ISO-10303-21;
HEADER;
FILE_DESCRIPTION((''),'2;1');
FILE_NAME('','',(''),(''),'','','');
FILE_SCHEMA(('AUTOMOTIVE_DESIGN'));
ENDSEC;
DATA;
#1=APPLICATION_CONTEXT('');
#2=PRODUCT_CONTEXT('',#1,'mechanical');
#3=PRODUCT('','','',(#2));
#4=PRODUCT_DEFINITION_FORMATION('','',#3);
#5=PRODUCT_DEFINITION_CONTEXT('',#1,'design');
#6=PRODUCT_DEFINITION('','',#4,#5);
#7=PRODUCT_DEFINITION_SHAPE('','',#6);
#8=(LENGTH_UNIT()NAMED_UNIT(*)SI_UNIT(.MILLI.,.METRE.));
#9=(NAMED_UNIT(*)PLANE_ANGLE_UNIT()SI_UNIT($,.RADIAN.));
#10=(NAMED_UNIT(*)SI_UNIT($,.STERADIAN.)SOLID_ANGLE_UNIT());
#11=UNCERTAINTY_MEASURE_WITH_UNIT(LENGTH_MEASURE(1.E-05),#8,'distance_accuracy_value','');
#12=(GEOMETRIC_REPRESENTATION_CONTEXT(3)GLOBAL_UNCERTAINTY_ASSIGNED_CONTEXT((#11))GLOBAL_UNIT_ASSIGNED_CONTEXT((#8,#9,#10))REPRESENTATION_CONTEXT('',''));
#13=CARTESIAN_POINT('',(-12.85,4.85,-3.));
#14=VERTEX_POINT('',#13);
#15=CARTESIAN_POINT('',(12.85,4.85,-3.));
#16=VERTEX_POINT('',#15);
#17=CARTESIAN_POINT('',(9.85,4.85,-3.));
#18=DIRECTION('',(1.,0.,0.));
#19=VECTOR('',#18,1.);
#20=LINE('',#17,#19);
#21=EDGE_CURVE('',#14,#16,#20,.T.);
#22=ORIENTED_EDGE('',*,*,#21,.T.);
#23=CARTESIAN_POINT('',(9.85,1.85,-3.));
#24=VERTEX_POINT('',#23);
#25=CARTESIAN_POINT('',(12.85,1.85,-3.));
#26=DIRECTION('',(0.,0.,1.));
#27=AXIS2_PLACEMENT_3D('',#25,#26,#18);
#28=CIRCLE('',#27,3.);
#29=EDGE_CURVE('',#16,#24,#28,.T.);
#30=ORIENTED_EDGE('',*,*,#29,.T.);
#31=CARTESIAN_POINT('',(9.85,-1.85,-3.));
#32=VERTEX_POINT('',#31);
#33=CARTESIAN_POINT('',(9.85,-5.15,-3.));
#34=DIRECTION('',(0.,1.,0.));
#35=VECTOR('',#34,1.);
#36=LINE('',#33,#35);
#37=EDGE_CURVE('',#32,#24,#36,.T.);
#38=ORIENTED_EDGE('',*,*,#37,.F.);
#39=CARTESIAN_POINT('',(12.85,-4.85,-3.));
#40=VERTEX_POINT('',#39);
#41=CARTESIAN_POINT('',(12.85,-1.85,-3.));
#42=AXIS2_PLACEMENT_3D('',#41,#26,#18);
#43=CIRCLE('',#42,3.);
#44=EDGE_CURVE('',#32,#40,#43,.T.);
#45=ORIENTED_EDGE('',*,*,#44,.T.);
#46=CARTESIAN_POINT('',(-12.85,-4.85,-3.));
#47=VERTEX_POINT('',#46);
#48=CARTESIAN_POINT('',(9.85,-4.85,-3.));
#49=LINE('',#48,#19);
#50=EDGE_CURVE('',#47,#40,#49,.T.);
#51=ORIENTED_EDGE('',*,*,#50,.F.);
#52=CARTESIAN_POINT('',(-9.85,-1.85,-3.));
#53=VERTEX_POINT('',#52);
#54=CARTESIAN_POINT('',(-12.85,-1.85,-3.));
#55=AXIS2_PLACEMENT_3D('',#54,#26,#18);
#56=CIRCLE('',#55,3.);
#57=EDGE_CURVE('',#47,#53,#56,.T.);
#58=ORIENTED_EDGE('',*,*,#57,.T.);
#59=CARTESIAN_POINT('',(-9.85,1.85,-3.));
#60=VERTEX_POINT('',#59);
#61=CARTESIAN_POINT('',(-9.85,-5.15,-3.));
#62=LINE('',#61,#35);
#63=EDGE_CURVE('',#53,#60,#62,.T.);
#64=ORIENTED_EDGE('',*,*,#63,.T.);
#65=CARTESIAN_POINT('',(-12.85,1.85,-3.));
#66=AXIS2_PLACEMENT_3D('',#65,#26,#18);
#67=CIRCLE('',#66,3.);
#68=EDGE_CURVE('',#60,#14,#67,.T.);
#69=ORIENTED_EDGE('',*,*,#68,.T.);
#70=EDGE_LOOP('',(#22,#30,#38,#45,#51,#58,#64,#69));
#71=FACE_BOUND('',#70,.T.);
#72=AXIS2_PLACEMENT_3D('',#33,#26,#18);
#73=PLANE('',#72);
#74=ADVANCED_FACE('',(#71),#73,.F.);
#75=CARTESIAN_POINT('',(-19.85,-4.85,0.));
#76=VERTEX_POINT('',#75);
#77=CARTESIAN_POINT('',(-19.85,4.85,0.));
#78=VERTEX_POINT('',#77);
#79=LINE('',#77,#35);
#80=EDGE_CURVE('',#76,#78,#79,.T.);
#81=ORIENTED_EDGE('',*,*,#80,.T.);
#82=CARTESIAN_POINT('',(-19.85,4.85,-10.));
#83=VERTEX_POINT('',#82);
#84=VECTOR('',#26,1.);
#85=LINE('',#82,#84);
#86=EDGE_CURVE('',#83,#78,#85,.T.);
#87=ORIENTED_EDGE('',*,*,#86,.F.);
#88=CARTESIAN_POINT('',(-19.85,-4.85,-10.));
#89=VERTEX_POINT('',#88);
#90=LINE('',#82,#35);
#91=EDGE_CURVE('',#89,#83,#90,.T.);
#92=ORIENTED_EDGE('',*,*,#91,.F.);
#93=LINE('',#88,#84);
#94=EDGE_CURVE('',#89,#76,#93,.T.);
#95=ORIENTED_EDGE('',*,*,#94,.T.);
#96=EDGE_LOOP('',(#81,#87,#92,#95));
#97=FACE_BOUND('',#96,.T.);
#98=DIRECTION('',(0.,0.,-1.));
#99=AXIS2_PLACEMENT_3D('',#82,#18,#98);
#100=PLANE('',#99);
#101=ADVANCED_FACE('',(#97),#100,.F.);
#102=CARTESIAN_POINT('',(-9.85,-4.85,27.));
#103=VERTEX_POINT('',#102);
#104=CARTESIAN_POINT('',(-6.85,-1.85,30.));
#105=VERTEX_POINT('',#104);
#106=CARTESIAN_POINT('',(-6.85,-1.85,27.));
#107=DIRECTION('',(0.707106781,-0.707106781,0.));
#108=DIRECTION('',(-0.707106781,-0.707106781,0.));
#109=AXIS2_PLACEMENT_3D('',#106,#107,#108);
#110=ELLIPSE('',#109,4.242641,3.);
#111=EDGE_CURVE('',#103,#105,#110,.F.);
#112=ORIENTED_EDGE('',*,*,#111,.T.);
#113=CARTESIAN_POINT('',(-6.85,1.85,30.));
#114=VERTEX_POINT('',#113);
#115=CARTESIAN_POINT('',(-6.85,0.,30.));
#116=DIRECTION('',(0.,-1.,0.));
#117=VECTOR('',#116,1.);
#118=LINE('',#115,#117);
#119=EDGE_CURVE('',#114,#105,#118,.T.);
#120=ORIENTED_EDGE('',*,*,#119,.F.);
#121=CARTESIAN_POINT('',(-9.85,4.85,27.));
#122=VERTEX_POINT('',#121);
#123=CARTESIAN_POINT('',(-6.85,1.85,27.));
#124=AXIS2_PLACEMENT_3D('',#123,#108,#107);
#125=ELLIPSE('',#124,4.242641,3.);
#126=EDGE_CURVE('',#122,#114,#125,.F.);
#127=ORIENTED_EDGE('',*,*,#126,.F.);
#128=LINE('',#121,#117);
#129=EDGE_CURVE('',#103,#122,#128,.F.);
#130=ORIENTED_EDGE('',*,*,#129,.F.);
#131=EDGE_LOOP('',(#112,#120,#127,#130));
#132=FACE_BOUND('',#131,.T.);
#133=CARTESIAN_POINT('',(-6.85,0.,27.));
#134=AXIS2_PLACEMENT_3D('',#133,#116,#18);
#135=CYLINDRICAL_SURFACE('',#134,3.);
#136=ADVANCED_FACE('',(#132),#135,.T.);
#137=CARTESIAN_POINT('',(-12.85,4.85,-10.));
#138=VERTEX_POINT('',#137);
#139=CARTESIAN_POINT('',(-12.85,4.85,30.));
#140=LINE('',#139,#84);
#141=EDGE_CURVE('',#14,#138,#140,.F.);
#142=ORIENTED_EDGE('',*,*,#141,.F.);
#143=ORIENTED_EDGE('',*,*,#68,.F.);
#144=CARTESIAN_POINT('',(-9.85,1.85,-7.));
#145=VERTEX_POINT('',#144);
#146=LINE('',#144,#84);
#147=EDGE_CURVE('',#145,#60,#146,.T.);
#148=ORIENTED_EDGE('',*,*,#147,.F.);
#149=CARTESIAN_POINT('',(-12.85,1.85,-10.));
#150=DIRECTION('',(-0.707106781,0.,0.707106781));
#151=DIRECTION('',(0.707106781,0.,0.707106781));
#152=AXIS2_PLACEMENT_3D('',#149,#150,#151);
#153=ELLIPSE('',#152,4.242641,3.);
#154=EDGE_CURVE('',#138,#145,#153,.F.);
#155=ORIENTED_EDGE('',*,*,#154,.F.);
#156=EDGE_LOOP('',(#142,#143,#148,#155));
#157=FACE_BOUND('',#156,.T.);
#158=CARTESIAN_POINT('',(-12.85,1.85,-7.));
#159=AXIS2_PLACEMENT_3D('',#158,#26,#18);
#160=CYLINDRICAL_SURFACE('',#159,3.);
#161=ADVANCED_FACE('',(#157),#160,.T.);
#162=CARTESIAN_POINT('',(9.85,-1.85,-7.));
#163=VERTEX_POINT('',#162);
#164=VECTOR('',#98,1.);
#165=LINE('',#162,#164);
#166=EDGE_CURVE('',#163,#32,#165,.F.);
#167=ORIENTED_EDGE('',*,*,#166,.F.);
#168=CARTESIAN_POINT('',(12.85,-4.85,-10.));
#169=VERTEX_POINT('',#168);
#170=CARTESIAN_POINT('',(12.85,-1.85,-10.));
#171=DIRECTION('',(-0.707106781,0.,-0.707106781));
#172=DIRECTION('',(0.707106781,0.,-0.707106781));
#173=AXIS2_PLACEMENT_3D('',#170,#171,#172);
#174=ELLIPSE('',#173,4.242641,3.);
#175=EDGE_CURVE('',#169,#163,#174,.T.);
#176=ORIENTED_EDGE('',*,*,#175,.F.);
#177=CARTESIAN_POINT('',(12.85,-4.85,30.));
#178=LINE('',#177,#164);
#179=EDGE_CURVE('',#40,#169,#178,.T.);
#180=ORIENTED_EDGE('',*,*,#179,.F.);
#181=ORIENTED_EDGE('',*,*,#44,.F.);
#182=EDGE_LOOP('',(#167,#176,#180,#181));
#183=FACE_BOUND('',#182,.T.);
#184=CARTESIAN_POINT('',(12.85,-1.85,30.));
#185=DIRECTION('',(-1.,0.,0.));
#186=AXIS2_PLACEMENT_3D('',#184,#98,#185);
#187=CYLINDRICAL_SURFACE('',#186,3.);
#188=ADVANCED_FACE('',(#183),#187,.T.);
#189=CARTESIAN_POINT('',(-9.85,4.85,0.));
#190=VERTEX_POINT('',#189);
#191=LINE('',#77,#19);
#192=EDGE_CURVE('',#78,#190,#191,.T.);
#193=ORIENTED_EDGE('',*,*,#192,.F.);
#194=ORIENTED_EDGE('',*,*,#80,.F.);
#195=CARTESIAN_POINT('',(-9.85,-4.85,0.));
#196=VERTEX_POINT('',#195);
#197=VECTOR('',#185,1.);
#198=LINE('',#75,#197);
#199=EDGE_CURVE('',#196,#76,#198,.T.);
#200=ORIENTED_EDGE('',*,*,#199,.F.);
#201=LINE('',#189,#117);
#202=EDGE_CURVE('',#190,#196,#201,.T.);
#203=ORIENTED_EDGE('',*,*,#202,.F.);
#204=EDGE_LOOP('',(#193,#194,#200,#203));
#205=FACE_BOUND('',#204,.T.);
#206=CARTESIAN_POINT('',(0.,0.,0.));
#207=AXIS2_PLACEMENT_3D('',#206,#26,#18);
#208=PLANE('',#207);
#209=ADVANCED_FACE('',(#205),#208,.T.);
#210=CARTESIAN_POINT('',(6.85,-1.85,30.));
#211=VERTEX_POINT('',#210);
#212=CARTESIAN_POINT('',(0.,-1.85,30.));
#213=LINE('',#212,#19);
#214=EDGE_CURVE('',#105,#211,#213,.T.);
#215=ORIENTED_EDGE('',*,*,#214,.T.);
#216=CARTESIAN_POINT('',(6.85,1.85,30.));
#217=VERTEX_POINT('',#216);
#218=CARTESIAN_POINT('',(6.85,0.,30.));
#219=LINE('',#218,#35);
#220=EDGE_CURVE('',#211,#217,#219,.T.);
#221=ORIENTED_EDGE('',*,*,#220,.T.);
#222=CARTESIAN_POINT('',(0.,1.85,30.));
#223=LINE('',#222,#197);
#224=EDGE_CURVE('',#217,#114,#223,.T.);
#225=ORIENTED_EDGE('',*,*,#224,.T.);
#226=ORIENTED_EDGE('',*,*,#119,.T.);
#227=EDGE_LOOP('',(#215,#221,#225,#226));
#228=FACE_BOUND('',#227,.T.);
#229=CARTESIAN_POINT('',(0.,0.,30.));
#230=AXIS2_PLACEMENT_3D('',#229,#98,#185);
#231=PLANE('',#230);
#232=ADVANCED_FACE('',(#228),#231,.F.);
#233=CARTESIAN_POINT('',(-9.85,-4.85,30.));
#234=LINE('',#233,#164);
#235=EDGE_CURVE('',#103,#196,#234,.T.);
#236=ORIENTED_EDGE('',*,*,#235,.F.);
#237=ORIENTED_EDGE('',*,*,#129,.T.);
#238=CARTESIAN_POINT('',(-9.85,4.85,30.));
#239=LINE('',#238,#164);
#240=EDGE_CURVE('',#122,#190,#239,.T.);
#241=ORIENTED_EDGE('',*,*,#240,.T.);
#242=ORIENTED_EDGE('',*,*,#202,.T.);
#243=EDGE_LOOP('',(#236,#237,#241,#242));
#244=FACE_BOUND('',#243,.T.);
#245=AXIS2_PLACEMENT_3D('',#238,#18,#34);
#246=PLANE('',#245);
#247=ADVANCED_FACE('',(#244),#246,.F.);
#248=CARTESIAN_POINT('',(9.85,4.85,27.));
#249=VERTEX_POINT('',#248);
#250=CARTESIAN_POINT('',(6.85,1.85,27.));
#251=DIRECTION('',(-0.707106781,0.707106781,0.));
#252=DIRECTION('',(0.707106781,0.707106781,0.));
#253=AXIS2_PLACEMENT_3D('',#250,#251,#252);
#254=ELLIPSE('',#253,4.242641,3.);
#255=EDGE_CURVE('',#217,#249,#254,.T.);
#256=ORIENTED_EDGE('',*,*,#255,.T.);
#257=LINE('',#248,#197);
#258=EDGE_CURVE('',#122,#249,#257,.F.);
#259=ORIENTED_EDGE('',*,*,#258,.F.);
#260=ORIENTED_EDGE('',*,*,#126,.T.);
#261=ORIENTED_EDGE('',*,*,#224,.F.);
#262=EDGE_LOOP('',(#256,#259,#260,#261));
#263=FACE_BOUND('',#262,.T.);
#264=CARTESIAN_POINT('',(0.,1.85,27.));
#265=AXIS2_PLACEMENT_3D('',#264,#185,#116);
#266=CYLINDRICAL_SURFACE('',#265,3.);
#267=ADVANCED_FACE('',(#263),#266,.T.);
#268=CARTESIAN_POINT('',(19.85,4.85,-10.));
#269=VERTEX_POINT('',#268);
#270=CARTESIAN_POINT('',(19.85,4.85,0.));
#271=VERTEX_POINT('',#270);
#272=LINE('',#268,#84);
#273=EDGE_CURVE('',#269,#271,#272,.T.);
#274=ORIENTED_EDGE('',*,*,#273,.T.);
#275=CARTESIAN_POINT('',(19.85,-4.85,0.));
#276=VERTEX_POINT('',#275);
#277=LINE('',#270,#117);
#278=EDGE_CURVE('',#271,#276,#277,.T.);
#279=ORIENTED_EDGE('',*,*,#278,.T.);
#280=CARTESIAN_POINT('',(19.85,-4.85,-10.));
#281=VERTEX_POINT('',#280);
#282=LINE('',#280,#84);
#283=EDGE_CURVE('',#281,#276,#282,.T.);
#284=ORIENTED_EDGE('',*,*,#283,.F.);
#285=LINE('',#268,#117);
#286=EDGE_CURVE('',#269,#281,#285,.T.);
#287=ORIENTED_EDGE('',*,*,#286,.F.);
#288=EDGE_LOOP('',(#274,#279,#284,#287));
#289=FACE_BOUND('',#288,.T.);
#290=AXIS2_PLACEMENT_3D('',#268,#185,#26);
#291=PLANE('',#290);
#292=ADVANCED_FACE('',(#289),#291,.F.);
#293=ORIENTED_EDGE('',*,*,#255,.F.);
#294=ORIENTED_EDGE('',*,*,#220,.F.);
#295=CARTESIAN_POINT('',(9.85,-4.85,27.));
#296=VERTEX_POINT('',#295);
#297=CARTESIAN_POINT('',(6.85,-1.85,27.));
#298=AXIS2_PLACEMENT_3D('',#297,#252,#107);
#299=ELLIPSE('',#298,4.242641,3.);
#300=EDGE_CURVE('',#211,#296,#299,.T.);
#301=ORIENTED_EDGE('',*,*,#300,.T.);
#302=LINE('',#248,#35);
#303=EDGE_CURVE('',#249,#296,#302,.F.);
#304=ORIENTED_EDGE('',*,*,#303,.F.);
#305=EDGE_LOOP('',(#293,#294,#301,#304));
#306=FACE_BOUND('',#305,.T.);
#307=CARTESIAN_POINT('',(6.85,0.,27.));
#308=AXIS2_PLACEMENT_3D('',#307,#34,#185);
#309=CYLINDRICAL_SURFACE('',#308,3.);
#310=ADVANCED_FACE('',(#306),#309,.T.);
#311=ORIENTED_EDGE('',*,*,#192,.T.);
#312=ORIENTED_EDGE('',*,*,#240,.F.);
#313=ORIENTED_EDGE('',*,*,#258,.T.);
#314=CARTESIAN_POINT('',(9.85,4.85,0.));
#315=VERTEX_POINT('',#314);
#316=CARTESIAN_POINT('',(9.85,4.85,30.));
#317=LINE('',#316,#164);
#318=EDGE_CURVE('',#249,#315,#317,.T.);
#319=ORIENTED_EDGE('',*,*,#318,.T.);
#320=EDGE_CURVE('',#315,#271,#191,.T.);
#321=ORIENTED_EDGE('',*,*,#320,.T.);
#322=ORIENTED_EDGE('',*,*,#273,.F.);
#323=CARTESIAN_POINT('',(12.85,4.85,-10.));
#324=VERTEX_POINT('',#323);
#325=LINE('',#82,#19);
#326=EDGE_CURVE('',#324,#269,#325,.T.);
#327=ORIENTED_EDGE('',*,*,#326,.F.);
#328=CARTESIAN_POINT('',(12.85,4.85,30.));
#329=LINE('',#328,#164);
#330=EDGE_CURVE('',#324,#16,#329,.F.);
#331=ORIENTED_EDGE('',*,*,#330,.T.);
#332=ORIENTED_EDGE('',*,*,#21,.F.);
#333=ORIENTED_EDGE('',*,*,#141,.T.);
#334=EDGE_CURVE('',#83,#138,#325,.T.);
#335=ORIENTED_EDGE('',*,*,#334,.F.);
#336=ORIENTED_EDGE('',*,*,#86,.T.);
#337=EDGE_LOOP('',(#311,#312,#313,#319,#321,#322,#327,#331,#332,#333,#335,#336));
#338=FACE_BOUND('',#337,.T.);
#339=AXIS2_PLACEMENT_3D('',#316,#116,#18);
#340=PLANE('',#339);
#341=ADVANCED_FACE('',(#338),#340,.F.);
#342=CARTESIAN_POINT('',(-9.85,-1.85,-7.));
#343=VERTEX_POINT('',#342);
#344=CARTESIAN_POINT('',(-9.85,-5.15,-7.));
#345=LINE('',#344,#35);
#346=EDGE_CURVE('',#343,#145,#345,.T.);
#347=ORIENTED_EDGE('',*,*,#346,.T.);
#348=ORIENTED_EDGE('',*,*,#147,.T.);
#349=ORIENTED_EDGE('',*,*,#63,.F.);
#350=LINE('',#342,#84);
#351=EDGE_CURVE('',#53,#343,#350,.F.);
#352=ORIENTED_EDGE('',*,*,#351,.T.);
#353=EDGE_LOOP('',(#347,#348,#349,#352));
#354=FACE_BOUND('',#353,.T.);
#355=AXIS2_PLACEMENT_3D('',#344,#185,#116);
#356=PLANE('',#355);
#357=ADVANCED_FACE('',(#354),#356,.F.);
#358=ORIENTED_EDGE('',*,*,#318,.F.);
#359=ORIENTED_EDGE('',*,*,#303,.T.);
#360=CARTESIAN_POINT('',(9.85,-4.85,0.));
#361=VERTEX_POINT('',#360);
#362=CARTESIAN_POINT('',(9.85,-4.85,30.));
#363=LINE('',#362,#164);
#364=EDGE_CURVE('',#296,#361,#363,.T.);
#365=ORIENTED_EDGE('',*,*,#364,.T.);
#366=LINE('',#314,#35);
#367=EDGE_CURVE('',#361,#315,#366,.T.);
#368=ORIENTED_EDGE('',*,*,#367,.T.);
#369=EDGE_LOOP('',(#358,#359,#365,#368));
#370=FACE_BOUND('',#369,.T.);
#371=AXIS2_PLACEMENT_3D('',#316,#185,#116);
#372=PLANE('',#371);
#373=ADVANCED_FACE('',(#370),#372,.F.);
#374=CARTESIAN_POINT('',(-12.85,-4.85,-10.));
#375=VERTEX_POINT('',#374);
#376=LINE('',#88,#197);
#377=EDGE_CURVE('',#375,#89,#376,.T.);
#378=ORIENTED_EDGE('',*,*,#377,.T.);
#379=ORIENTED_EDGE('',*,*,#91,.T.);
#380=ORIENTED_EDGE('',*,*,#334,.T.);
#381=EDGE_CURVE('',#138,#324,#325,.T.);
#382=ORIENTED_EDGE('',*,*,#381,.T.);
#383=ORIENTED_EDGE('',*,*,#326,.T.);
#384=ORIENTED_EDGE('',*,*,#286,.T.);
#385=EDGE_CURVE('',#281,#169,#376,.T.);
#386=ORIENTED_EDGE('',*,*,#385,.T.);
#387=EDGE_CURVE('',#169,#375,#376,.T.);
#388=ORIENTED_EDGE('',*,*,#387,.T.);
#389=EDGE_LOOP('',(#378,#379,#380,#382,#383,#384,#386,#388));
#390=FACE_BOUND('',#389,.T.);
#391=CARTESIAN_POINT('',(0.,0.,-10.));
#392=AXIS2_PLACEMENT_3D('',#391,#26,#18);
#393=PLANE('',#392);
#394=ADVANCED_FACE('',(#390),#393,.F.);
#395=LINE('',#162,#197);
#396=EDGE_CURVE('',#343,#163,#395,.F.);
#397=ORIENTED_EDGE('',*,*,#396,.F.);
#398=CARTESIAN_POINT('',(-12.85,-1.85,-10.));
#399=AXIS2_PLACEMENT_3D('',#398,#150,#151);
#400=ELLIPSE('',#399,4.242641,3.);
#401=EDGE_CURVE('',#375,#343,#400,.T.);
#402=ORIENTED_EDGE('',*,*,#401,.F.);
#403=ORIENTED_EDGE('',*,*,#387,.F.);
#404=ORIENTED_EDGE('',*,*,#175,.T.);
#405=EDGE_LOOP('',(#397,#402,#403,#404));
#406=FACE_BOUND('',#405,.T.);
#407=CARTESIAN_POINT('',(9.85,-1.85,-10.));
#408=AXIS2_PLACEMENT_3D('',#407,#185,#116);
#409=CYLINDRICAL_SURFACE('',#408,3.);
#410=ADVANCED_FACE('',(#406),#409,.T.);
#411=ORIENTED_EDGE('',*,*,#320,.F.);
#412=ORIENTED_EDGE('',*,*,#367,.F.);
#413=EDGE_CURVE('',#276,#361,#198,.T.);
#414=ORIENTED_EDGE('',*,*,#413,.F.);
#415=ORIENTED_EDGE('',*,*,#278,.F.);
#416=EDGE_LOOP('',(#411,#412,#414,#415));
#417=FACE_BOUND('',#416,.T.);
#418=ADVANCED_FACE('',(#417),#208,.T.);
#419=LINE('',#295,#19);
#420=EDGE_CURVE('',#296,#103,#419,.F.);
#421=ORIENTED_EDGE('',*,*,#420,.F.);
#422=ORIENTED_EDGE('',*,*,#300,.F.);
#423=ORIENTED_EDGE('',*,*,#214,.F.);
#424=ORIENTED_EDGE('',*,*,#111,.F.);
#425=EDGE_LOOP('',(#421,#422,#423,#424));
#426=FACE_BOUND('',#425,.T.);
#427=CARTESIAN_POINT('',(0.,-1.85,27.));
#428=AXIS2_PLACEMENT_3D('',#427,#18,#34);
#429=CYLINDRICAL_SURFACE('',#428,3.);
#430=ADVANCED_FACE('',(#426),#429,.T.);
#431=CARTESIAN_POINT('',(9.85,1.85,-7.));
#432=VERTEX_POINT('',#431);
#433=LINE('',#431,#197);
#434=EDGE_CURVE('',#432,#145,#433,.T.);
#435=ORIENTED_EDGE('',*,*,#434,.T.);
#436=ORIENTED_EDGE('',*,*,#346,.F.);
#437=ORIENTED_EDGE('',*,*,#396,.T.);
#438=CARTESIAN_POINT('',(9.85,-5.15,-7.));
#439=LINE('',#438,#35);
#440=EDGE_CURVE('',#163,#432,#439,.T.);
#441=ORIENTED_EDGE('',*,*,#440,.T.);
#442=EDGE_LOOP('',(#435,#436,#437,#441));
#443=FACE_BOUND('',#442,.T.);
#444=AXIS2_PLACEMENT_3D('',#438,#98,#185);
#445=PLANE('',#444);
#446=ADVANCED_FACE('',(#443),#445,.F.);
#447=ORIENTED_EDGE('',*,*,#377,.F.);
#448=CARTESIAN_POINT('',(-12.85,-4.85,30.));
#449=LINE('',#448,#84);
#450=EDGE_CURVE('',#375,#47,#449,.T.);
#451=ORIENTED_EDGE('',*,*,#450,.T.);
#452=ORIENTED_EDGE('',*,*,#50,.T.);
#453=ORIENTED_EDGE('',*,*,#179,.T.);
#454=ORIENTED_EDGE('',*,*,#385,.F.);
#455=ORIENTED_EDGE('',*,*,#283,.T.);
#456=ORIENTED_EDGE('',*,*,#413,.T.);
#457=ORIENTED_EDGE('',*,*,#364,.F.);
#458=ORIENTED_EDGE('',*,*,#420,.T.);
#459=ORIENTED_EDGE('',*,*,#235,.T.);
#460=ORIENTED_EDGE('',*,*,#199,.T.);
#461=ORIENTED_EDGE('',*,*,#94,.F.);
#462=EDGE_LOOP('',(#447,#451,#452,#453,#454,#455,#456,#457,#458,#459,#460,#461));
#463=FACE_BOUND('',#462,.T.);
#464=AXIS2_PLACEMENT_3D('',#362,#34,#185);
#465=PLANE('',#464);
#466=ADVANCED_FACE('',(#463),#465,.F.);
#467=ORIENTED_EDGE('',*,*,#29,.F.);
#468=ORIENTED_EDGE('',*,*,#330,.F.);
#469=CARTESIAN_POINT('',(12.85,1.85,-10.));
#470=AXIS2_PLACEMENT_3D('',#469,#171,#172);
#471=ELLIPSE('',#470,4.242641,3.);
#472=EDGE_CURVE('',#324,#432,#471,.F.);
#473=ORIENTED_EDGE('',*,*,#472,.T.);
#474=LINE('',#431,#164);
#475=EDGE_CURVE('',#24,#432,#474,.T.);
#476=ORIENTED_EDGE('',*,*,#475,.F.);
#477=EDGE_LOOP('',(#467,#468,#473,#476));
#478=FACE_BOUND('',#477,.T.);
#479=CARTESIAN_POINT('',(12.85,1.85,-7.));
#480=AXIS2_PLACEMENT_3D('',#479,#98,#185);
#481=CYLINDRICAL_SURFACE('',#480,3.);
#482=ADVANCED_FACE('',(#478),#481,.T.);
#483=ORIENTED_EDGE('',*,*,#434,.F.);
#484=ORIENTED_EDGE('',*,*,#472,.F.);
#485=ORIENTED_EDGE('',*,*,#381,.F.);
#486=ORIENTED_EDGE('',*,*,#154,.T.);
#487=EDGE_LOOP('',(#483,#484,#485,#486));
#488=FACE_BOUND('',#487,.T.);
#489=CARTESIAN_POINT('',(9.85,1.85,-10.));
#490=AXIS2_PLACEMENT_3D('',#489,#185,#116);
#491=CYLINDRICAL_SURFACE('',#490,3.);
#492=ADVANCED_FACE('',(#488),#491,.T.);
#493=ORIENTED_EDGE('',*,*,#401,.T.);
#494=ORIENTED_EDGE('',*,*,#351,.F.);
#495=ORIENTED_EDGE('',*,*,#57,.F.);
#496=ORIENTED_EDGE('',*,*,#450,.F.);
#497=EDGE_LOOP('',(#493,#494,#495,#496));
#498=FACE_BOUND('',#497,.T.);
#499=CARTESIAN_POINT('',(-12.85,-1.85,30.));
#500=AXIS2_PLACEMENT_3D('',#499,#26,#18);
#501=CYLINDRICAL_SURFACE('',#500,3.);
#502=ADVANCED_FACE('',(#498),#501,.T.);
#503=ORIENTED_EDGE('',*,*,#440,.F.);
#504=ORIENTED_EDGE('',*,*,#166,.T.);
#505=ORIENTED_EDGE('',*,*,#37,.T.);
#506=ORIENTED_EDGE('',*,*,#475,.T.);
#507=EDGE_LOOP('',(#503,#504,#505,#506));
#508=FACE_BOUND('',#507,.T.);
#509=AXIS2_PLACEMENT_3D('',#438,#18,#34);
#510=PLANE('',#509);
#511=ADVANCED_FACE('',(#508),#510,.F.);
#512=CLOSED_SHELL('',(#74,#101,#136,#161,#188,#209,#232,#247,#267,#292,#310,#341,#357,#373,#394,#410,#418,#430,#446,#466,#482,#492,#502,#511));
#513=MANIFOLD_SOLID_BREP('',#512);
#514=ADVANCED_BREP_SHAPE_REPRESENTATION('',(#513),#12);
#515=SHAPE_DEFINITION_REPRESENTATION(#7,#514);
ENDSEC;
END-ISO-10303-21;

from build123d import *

# Parameters (mm, degrees)
SKETCH1_W           = 19.7
SKETCH1_H           = 9.7
BOSS_EXTRUDE1_DEPTH = 30
SKETCH2_W           = 39.7
SKETCH2_H           = 9.7
BOSS_EXTRUDE2_DEPTH = 10
SKETCH3_W           = 19.7
SKETCH3_H           = 4
CUT_EXTRUDE1_DEPTH  = 10
FILLET1_R           = 3
FILLET2_R           = 3


with BuildPart() as part:
    # Sketch1 → Boss-Extrude1 (new body)
    with BuildSketch(Plane.XY):
        Rectangle(SKETCH1_W, SKETCH1_H)
    extrude(amount=BOSS_EXTRUDE1_DEPTH)

    # Sketch2 → Boss-Extrude2 (add)
    with BuildSketch(Plane(origin=(0, 0, 0), x_dir=(-1, 0, 0), z_dir=(0, 0, -1))):
        Rectangle(SKETCH2_W, SKETCH2_H)
    extrude(amount=BOSS_EXTRUDE2_DEPTH)

    # Sketch3 → Cut-Extrude1 (cut)
    with BuildSketch(Plane(origin=(0, 4.85, 0), x_dir=(1, 0, 0), z_dir=(0, 1, 0))):
        with Locations((0, 5)):
            Rectangle(SKETCH3_W, SKETCH3_H)
    extrude(amount=-CUT_EXTRUDE1_DEPTH, mode=Mode.SUBTRACT)

    # Fillet1
    fillet1_edges = [part.edges().sort_by_distance(p)[0] for p in [
        (-9.85, -4.85, -5),
        (0, -4.85, -7),
        (9.85, -4.85, -5),
        (-9.85, 4.85, -5),
        (9.85, 4.85, -5),
        (0, 4.85, -7),
    ]]
    fillet(fillet1_edges, radius=FILLET1_R - 0.0001)  # a hair under: the kernel refuses the full size

    # Fillet2
    fillet2_edges = [part.edges().sort_by_distance(p)[0] for p in [
        (9.85, 0, 30),
        (0, 4.85, 30),
        (-9.85, 0, 30),
        (0, -4.85, 30),
    ]]
    fillet(fillet2_edges, radius=FILLET2_R)


solid = part.part
